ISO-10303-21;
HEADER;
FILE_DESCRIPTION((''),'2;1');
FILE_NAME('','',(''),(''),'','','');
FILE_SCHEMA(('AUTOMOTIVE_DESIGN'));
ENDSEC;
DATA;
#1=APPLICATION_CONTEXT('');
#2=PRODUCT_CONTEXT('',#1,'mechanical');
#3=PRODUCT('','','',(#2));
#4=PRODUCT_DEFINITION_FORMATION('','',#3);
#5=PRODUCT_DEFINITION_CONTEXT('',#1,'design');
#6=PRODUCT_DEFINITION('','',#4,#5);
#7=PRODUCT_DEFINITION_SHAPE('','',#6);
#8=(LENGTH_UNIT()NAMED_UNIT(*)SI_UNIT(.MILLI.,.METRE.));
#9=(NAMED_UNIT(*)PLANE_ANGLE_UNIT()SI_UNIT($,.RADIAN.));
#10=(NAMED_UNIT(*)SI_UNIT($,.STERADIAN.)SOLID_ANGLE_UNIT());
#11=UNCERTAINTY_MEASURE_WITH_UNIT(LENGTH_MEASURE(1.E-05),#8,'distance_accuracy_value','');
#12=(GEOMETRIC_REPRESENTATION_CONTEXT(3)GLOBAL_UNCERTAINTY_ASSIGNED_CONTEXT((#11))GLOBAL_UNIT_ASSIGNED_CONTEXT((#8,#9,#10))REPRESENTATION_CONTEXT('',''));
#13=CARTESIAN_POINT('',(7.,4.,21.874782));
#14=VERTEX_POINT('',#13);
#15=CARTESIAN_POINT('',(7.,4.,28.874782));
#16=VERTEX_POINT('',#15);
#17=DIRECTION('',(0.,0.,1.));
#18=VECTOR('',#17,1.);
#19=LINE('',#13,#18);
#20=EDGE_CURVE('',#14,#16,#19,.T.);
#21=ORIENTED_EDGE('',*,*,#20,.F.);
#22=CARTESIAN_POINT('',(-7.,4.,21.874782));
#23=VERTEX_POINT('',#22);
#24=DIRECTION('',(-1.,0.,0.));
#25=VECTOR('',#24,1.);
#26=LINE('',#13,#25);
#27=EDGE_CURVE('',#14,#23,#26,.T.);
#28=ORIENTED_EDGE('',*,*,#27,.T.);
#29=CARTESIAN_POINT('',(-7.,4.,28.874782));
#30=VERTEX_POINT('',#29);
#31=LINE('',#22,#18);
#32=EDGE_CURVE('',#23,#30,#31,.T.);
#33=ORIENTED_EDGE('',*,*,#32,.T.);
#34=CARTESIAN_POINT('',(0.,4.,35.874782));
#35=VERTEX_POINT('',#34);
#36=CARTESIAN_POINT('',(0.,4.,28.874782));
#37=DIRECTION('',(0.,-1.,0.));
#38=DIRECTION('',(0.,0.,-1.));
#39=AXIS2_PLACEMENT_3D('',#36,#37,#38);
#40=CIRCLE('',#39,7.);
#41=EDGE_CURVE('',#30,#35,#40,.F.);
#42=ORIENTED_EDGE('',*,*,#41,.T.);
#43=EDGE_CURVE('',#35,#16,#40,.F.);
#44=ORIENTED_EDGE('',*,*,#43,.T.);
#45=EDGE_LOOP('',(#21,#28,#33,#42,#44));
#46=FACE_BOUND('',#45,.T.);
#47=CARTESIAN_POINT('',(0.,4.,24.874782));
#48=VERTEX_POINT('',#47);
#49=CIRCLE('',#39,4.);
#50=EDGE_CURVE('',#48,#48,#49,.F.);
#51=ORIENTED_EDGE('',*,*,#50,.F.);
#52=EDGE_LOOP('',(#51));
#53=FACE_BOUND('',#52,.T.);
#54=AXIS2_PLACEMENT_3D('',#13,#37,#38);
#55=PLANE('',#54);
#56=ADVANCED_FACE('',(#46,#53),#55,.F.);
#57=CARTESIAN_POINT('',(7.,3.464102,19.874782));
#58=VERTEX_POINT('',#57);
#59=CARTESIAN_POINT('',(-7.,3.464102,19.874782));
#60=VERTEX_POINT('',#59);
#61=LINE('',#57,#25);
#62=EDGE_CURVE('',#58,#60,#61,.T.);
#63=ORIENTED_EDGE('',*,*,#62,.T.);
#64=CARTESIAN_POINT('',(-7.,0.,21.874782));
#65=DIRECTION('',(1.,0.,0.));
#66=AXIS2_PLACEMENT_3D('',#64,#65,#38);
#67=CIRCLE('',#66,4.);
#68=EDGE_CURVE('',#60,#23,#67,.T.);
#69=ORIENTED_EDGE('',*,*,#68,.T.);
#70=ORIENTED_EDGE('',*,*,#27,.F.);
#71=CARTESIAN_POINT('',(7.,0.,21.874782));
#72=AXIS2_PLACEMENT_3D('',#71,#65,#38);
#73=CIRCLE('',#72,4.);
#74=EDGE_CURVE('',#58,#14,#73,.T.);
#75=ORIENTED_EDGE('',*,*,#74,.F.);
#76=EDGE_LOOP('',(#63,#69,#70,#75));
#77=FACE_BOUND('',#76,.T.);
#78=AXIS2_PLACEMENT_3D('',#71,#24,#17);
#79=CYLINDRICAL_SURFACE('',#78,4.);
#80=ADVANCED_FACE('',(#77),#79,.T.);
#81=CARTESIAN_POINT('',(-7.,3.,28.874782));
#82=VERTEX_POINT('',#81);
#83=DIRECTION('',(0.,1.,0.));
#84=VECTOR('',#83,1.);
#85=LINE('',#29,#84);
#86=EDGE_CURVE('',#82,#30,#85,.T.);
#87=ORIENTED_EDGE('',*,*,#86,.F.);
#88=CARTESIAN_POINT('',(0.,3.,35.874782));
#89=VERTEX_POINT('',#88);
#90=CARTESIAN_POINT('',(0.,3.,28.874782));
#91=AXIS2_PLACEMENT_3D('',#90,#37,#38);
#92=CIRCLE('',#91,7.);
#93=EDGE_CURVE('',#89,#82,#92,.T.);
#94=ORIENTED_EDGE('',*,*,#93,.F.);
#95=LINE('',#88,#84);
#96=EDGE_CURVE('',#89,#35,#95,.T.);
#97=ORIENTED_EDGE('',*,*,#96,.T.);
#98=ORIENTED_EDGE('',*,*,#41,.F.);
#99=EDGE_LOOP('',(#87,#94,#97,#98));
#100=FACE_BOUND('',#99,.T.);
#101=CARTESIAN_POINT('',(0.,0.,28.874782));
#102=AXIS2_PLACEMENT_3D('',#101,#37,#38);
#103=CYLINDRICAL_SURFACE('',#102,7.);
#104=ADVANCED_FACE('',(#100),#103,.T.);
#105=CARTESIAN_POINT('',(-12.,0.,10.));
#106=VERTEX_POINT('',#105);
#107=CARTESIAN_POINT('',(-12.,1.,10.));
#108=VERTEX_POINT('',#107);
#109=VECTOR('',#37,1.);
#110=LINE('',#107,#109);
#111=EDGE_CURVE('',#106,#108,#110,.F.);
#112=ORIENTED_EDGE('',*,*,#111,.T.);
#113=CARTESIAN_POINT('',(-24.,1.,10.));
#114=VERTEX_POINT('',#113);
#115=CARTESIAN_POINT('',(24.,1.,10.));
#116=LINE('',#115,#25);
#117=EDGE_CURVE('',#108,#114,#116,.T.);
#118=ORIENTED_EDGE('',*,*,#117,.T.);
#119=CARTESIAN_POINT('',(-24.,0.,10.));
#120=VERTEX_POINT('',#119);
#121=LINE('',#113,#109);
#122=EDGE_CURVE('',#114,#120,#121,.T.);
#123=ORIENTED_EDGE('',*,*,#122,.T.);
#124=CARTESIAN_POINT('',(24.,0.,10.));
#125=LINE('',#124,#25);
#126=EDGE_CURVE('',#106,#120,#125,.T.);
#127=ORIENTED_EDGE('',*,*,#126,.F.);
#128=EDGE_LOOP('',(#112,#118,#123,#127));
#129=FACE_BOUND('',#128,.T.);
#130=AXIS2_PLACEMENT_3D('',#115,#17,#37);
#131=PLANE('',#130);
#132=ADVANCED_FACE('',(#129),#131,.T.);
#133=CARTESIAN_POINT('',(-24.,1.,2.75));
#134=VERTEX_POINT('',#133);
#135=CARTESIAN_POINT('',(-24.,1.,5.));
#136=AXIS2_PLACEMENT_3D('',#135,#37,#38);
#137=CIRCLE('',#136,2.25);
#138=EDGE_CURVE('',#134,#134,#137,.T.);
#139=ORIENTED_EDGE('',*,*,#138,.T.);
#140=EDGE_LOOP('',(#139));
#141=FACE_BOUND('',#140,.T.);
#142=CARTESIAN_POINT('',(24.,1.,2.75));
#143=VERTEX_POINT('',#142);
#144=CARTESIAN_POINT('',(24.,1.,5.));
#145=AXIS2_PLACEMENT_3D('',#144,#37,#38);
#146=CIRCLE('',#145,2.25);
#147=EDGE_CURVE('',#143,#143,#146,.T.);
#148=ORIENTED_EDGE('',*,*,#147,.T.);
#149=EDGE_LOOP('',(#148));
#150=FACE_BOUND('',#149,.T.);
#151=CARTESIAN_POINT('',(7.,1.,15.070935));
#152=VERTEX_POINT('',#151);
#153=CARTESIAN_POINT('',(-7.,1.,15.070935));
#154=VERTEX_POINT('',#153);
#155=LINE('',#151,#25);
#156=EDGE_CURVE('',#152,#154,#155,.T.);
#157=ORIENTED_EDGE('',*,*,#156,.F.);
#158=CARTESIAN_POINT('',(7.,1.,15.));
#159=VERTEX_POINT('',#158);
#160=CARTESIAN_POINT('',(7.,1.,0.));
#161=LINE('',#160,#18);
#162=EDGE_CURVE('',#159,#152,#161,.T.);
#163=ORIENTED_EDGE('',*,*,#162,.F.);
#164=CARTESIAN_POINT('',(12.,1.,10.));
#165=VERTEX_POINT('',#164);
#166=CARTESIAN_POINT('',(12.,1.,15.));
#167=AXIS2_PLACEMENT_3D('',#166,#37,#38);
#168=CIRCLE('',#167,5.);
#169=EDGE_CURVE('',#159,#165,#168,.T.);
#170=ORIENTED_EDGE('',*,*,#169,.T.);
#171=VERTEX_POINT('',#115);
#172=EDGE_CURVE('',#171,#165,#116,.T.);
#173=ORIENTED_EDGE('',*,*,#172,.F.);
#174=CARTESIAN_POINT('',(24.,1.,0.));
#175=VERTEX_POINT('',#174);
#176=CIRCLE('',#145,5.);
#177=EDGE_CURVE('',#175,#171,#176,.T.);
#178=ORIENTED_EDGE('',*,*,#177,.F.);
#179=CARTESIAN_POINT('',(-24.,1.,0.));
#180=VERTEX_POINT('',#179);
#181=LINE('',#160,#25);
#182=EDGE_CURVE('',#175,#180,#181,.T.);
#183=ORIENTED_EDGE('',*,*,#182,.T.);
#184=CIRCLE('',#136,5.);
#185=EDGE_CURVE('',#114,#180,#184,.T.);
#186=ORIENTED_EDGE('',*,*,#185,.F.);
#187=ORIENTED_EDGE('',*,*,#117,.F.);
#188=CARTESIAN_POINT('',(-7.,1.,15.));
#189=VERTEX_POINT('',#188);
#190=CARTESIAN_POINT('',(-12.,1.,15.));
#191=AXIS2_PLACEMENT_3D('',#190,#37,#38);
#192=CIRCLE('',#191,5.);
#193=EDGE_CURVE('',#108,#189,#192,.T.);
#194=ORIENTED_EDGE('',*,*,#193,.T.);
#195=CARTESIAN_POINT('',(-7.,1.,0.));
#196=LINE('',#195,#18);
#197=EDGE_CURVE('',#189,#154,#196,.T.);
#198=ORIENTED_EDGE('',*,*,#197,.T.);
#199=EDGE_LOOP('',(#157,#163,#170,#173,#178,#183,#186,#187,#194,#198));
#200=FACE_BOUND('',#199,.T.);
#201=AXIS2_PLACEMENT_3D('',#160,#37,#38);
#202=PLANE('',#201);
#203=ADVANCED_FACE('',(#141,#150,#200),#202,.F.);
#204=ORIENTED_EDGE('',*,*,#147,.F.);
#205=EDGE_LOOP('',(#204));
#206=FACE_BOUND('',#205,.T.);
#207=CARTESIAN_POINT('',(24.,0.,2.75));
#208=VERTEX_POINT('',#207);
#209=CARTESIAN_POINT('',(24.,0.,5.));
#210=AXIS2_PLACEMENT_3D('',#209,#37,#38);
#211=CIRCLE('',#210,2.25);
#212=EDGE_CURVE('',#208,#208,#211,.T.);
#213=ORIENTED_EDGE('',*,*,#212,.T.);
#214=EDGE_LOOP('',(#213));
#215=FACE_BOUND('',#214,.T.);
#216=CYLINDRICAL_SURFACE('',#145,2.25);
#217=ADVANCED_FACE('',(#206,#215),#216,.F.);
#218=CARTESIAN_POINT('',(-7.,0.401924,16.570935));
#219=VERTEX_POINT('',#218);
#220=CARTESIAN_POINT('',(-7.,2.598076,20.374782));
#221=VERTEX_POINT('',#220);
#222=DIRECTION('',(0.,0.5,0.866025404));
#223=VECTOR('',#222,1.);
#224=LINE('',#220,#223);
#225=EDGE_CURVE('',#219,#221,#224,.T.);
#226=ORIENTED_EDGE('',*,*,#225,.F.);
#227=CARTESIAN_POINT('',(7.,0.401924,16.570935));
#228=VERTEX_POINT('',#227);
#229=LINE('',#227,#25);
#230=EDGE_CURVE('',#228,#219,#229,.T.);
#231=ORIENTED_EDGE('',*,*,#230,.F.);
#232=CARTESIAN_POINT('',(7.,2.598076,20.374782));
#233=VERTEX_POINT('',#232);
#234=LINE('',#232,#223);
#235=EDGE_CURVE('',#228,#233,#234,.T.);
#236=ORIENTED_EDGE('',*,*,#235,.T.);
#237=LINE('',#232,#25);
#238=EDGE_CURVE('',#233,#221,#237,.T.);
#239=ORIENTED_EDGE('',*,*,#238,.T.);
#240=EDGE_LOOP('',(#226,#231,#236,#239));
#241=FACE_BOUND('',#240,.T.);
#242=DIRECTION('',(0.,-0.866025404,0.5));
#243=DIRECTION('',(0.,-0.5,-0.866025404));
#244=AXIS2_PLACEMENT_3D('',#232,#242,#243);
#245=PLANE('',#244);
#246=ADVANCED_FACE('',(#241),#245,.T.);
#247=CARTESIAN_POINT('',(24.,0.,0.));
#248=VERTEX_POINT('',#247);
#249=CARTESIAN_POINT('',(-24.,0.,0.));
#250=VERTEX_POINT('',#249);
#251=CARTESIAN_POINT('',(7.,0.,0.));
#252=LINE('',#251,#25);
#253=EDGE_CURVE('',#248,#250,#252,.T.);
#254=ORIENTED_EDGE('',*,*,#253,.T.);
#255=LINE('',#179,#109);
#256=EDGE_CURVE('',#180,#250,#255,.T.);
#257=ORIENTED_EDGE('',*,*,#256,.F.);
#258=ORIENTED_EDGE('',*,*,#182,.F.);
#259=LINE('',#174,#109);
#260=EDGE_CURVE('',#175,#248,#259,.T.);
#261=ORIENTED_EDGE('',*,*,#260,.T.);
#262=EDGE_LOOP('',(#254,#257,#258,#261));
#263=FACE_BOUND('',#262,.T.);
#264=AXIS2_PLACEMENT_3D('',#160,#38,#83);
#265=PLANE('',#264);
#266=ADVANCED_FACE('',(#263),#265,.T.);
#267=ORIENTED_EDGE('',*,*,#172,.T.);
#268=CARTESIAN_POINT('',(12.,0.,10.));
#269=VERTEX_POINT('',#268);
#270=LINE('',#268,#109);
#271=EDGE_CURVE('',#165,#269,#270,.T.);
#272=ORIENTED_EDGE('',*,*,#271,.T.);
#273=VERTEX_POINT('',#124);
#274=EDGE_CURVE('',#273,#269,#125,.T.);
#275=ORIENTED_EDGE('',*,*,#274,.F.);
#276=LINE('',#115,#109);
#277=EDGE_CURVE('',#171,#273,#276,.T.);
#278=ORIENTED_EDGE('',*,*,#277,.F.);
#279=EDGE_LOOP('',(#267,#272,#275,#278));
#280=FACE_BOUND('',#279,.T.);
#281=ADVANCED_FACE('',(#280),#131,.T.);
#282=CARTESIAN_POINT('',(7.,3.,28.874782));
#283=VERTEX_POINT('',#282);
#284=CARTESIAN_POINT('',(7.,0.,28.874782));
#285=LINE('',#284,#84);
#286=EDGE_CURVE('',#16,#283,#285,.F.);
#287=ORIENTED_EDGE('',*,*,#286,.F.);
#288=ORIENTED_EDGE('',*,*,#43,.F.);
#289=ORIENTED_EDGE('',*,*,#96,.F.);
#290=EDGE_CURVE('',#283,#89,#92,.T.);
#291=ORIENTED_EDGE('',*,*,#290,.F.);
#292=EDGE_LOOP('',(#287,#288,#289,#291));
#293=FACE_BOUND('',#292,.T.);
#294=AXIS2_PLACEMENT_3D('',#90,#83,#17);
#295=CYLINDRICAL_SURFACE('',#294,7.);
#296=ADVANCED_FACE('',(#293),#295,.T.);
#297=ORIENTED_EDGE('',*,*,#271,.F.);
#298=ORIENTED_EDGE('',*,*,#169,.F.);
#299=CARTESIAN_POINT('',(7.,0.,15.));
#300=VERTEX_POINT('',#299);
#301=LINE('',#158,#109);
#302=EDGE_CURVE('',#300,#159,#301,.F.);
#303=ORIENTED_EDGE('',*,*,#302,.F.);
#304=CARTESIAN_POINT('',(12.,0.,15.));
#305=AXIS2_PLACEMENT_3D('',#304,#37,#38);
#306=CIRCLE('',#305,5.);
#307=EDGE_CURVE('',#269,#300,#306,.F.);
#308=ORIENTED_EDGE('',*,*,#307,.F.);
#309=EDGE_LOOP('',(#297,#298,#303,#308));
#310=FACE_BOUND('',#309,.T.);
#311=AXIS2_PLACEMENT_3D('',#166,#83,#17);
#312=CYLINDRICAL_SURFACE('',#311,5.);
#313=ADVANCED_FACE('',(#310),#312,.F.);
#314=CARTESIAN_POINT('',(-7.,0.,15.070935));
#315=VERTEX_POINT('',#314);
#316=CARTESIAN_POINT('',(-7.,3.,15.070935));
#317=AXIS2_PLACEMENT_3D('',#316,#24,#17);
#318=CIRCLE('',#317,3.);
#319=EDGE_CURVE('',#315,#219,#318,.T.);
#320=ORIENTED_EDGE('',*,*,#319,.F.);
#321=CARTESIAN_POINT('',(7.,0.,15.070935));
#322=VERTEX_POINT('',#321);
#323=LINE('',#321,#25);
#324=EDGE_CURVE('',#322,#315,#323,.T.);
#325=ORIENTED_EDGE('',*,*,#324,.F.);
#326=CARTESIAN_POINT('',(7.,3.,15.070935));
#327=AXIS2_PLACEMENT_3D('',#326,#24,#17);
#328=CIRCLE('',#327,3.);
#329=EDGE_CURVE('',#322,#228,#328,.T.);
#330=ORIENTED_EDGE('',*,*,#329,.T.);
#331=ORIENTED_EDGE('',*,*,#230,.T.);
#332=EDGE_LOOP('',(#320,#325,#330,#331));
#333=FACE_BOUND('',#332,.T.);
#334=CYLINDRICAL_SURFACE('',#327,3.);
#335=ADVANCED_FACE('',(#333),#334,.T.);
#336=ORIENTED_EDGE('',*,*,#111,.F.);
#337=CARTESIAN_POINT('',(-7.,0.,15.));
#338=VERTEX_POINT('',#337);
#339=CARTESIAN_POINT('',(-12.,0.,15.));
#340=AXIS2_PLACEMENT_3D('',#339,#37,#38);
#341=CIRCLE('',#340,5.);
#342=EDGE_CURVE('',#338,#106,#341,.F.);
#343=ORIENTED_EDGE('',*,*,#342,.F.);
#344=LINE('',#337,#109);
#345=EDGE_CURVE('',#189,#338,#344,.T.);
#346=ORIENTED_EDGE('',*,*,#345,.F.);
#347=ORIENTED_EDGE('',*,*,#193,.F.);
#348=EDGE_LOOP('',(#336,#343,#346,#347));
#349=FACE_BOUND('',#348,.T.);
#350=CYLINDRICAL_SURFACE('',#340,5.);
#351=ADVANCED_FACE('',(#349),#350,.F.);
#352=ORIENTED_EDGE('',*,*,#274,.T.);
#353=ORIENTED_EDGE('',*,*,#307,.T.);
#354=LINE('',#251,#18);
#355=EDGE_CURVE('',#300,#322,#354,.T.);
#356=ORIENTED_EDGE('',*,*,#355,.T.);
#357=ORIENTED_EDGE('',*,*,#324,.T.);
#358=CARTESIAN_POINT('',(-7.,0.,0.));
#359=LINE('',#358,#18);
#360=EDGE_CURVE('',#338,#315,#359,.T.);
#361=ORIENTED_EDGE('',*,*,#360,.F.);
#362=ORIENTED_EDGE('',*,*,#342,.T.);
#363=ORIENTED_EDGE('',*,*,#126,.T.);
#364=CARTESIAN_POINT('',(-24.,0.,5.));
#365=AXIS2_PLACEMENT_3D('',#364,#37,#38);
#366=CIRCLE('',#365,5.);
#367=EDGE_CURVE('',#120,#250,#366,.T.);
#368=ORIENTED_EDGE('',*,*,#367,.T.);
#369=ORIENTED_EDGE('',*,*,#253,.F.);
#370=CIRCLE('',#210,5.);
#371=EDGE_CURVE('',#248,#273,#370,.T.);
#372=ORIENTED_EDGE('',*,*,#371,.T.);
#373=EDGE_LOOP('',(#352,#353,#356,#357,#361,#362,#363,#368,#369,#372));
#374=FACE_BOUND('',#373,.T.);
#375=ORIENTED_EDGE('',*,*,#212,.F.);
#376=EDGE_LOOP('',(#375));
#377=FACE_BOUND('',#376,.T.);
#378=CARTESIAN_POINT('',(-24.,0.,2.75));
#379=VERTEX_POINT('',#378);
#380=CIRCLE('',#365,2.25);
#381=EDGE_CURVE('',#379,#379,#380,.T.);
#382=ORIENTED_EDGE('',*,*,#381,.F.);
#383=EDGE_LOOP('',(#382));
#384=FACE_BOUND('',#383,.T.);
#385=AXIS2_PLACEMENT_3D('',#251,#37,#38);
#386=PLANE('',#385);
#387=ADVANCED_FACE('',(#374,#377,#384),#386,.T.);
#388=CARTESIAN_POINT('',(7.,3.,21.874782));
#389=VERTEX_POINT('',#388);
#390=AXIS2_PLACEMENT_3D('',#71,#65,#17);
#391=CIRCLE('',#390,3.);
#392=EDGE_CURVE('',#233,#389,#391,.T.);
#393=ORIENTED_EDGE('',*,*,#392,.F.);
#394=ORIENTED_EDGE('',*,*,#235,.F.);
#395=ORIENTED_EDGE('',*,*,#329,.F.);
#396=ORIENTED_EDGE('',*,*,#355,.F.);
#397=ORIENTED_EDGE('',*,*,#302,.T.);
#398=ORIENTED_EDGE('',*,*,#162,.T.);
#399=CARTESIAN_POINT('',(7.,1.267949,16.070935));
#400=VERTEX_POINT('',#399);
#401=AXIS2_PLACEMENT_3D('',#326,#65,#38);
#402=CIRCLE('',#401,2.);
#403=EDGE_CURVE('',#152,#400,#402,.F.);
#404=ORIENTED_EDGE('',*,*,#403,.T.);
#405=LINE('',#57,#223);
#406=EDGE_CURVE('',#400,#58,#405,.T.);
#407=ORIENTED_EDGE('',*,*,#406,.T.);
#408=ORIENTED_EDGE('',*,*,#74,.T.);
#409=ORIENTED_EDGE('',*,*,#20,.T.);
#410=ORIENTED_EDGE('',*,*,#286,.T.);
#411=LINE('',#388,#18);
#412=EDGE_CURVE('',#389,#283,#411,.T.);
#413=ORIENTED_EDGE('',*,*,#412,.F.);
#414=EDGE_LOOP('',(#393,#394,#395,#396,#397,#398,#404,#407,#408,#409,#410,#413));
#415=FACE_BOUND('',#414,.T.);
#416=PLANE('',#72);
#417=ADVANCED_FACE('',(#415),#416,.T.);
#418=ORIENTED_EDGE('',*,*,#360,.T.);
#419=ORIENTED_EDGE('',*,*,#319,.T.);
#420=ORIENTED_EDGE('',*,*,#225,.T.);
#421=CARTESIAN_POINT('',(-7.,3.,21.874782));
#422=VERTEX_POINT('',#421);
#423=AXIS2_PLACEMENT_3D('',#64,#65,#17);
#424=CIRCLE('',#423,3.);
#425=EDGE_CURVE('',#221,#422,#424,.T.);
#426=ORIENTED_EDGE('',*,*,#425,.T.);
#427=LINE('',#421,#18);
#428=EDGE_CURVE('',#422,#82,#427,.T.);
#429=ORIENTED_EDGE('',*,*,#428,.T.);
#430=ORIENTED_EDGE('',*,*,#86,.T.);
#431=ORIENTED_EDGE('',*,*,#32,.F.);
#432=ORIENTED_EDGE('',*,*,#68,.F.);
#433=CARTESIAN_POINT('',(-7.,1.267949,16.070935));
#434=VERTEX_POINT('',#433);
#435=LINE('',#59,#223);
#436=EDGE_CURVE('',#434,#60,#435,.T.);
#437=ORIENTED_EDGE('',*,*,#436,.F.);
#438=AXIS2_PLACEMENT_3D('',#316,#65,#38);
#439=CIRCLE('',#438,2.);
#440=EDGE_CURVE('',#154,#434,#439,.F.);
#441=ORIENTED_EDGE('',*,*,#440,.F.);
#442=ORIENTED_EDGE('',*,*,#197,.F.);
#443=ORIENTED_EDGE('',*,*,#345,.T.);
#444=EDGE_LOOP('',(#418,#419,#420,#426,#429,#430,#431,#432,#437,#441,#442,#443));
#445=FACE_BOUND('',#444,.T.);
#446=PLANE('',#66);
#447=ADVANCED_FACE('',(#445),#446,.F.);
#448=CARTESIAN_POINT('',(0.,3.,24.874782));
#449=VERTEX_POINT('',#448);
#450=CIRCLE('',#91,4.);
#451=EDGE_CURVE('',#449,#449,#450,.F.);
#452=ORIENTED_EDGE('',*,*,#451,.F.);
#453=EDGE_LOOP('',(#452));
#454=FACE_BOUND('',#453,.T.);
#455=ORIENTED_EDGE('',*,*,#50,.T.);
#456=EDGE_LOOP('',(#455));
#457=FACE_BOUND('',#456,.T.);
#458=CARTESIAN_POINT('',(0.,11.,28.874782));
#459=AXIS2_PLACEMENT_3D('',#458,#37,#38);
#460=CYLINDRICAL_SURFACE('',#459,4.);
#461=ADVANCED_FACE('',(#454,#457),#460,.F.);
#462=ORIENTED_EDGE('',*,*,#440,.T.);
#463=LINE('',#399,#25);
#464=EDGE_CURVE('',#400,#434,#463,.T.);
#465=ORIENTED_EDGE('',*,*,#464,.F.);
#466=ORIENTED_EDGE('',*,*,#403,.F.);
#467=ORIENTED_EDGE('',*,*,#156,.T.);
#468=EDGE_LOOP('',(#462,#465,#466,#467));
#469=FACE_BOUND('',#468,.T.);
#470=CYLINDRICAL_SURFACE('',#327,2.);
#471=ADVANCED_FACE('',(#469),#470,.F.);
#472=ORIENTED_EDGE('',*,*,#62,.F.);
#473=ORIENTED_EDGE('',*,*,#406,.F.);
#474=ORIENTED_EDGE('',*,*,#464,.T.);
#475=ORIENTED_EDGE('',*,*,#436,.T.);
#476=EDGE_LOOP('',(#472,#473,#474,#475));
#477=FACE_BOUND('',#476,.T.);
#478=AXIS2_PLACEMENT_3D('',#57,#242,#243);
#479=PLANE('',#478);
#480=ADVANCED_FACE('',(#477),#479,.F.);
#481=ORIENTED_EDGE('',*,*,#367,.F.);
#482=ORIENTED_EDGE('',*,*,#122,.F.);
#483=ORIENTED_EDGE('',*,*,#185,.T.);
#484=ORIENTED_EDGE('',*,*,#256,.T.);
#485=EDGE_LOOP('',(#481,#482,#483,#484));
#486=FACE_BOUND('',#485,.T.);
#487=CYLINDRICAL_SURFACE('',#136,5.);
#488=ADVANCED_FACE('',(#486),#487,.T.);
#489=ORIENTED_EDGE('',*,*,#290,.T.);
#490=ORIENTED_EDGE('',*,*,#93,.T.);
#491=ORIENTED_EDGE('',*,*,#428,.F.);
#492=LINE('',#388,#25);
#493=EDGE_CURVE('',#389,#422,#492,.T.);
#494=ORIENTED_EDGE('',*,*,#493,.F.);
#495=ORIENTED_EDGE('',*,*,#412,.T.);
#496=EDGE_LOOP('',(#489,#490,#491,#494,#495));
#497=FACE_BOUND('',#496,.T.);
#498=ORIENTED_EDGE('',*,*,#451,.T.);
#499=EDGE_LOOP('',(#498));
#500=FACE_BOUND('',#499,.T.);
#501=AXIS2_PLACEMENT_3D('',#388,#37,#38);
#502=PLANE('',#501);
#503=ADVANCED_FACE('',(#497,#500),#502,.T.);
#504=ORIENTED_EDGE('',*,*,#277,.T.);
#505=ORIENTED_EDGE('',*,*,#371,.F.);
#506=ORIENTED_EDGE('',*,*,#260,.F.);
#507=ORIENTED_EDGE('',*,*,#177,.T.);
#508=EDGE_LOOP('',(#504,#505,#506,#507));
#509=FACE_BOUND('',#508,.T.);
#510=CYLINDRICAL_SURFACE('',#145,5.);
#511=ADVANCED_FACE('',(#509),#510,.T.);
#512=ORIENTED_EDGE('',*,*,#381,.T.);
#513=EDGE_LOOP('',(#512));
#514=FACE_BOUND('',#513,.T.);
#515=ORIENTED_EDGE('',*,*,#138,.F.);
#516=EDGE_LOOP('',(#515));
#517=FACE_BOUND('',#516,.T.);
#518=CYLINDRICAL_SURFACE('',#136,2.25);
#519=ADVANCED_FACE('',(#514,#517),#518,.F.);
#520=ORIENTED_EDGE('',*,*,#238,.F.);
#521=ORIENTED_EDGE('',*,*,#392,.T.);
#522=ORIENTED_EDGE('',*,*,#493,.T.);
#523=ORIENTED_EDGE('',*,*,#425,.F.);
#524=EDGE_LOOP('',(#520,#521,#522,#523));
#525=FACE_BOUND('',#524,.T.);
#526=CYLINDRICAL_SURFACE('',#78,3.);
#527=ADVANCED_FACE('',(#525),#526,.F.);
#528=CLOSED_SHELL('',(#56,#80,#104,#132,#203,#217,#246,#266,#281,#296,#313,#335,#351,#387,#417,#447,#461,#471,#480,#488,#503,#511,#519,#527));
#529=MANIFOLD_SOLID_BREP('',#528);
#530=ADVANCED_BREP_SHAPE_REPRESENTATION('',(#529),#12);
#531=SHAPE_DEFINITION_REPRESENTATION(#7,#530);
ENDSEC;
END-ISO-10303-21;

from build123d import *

# Parameters (mm, degrees)
EXTRUDE_THIN1_DEPTH     = 7
FILLET1_R               = 7
CUT_EXTRUDE1_DEPTH      = 10
CUT_EXTRUDE1_DEPTH_BACK = 10
SKETCH2_R               = 4
SKETCH3_R               = 2.25
BOSS_EXTRUDE1_DEPTH     = 1
FILLET2_R               = 5


with BuildPart() as part:
    # Sketch1 → Extrude-Thin1 (new, symmetric)
    with BuildSketch(Plane(origin=(0, 0, 0), x_dir=(0, 0, -1), z_dir=(1, 0, 0))):
        with BuildLine():
            Line((0, 0), (-15.070934652, 0))
            ThreePointArc((-15.070934652, 0), (-15.847391787, 0.102222521), (-16.570934652, 0.401923789))
            Line((-16.570934652, 0.401923789), (-20.374782229, 2.598076211))
            ThreePointArc((-20.374782229, 2.598076211), (-21.098325094, 2.897777479), (-21.874782229, 3))
            Line((-21.874782229, 3), (-35.874782229, 3))
            Line((-35.874782229, 3), (-35.874782229, 4))
            Line((-35.874782229, 4), (-21.874782229, 4))
            ThreePointArc((-21.874782229, 4), (-20.839506049, 3.863703305), (-19.874782229, 3.464101615))
            Line((-19.874782229, 3.464101615), (-16.070934652, 1.267949192))
            ThreePointArc((-16.070934652, 1.267949192), (-15.588572742, 1.068148347), (-15.070934652, 1))
            Line((-15.070934652, 1), (0, 1))
            Line((0, 1), (0, 0))
        make_face()
    extrude(amount=EXTRUDE_THIN1_DEPTH, both=True)

    # Fillet1
    fillet1_edges = [part.edges().sort_by_distance(p)[0] for p in [
        (-7, 3.5, 35.874782229),
        (7, 3.5, 35.874782229),
    ]]
    fillet(fillet1_edges, radius=FILLET1_R - 0.0001)  # a hair under: the kernel refuses the full size

    # Sketch2 → Cut-Extrude1 (cut, two sides: drawn at the far end of the back side and taken through both)
    with BuildSketch(Plane(origin=(0, 1, 0), x_dir=(1, 0, 0), z_dir=(0, 1, 0)).offset(-CUT_EXTRUDE1_DEPTH_BACK)):
        with Locations(Location((0, -28.874782229, 0), (0, 0, 90))):
            Circle(SKETCH2_R)
    extrude(amount=CUT_EXTRUDE1_DEPTH + CUT_EXTRUDE1_DEPTH_BACK, mode=Mode.SUBTRACT)

    # Sketch3 → Boss-Extrude1 (add)
    with BuildSketch(Plane.XZ):
        with BuildLine():
            Line((24, 0), (-24, 0))
            ThreePointArc((-24, 0), (-29, 5), (-24, 10))
            Line((-24, 10), (24, 10))
            ThreePointArc((24, 10), (29, 5), (24, 0))
        make_face()
        with Locations(Location((24, 5, 0), (0, 0, 270))):
            Circle(SKETCH3_R, mode=Mode.SUBTRACT)
        with Locations(Location((-24, 5, 0), (0, 0, 270))):
            Circle(SKETCH3_R, mode=Mode.SUBTRACT)
    extrude(amount=-BOSS_EXTRUDE1_DEPTH)

    # Fillet2
    fillet2_edges = [part.edges().sort_by_distance(p)[0] for p in [
        (-7, 0.5, 10),
        (7, 0.5, 10),
    ]]
    fillet(fillet2_edges, radius=FILLET2_R)


solid = part.part
